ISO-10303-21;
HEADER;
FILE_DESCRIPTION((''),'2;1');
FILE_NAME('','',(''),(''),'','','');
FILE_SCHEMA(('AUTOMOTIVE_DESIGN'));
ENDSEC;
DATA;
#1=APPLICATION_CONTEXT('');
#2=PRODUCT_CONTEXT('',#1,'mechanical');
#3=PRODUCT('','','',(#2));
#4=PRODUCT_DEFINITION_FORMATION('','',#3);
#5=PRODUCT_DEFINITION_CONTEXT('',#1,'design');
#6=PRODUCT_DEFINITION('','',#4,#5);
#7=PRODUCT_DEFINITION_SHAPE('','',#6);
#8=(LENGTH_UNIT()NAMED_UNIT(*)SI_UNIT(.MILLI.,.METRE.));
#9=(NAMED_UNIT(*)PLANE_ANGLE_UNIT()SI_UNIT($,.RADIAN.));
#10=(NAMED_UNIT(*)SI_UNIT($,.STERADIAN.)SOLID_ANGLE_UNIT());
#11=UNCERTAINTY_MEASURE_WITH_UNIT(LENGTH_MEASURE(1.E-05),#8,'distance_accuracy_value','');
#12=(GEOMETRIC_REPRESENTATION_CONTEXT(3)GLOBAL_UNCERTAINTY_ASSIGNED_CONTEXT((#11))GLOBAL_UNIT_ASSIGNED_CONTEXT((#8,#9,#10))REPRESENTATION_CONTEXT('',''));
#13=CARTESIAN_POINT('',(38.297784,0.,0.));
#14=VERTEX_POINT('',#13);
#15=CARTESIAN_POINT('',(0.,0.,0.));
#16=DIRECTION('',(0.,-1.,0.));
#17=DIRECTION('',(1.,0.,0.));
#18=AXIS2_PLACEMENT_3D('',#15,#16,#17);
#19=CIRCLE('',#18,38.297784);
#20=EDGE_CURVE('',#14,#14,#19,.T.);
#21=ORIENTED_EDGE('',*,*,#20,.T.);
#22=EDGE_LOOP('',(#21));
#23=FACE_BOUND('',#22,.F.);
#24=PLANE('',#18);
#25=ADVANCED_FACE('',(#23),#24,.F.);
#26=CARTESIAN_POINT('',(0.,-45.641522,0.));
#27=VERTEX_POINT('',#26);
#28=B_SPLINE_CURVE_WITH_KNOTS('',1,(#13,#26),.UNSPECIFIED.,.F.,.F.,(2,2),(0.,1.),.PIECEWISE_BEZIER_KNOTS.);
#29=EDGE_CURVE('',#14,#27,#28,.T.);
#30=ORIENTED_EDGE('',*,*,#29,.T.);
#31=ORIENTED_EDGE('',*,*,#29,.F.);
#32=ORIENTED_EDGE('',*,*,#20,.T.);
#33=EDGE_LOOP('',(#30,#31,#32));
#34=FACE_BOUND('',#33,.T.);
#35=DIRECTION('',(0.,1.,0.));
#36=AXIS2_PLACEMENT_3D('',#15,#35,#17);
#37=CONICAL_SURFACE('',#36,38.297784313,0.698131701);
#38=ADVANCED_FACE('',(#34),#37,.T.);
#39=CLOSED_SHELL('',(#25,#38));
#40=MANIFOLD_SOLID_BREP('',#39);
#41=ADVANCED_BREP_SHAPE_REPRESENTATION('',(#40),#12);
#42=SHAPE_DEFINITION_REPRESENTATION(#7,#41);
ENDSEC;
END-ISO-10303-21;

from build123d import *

# Parameters (mm, degrees)
F0_R = 38.2977843127


# Not quite as in the source:
# - an extrude whose draft closes it to a point is written as a loft to that point


with BuildPart() as f1:
    # F0 (on Front) → F1 section 0
    with BuildSketch(Plane.XZ, mode=Mode.PRIVATE) as f1_s0:
        Circle(F0_R)
    loft([f1_s0.sketch, Vertex(0, -45.6415220431, 0)], ruled=True)


solid = f1.part
